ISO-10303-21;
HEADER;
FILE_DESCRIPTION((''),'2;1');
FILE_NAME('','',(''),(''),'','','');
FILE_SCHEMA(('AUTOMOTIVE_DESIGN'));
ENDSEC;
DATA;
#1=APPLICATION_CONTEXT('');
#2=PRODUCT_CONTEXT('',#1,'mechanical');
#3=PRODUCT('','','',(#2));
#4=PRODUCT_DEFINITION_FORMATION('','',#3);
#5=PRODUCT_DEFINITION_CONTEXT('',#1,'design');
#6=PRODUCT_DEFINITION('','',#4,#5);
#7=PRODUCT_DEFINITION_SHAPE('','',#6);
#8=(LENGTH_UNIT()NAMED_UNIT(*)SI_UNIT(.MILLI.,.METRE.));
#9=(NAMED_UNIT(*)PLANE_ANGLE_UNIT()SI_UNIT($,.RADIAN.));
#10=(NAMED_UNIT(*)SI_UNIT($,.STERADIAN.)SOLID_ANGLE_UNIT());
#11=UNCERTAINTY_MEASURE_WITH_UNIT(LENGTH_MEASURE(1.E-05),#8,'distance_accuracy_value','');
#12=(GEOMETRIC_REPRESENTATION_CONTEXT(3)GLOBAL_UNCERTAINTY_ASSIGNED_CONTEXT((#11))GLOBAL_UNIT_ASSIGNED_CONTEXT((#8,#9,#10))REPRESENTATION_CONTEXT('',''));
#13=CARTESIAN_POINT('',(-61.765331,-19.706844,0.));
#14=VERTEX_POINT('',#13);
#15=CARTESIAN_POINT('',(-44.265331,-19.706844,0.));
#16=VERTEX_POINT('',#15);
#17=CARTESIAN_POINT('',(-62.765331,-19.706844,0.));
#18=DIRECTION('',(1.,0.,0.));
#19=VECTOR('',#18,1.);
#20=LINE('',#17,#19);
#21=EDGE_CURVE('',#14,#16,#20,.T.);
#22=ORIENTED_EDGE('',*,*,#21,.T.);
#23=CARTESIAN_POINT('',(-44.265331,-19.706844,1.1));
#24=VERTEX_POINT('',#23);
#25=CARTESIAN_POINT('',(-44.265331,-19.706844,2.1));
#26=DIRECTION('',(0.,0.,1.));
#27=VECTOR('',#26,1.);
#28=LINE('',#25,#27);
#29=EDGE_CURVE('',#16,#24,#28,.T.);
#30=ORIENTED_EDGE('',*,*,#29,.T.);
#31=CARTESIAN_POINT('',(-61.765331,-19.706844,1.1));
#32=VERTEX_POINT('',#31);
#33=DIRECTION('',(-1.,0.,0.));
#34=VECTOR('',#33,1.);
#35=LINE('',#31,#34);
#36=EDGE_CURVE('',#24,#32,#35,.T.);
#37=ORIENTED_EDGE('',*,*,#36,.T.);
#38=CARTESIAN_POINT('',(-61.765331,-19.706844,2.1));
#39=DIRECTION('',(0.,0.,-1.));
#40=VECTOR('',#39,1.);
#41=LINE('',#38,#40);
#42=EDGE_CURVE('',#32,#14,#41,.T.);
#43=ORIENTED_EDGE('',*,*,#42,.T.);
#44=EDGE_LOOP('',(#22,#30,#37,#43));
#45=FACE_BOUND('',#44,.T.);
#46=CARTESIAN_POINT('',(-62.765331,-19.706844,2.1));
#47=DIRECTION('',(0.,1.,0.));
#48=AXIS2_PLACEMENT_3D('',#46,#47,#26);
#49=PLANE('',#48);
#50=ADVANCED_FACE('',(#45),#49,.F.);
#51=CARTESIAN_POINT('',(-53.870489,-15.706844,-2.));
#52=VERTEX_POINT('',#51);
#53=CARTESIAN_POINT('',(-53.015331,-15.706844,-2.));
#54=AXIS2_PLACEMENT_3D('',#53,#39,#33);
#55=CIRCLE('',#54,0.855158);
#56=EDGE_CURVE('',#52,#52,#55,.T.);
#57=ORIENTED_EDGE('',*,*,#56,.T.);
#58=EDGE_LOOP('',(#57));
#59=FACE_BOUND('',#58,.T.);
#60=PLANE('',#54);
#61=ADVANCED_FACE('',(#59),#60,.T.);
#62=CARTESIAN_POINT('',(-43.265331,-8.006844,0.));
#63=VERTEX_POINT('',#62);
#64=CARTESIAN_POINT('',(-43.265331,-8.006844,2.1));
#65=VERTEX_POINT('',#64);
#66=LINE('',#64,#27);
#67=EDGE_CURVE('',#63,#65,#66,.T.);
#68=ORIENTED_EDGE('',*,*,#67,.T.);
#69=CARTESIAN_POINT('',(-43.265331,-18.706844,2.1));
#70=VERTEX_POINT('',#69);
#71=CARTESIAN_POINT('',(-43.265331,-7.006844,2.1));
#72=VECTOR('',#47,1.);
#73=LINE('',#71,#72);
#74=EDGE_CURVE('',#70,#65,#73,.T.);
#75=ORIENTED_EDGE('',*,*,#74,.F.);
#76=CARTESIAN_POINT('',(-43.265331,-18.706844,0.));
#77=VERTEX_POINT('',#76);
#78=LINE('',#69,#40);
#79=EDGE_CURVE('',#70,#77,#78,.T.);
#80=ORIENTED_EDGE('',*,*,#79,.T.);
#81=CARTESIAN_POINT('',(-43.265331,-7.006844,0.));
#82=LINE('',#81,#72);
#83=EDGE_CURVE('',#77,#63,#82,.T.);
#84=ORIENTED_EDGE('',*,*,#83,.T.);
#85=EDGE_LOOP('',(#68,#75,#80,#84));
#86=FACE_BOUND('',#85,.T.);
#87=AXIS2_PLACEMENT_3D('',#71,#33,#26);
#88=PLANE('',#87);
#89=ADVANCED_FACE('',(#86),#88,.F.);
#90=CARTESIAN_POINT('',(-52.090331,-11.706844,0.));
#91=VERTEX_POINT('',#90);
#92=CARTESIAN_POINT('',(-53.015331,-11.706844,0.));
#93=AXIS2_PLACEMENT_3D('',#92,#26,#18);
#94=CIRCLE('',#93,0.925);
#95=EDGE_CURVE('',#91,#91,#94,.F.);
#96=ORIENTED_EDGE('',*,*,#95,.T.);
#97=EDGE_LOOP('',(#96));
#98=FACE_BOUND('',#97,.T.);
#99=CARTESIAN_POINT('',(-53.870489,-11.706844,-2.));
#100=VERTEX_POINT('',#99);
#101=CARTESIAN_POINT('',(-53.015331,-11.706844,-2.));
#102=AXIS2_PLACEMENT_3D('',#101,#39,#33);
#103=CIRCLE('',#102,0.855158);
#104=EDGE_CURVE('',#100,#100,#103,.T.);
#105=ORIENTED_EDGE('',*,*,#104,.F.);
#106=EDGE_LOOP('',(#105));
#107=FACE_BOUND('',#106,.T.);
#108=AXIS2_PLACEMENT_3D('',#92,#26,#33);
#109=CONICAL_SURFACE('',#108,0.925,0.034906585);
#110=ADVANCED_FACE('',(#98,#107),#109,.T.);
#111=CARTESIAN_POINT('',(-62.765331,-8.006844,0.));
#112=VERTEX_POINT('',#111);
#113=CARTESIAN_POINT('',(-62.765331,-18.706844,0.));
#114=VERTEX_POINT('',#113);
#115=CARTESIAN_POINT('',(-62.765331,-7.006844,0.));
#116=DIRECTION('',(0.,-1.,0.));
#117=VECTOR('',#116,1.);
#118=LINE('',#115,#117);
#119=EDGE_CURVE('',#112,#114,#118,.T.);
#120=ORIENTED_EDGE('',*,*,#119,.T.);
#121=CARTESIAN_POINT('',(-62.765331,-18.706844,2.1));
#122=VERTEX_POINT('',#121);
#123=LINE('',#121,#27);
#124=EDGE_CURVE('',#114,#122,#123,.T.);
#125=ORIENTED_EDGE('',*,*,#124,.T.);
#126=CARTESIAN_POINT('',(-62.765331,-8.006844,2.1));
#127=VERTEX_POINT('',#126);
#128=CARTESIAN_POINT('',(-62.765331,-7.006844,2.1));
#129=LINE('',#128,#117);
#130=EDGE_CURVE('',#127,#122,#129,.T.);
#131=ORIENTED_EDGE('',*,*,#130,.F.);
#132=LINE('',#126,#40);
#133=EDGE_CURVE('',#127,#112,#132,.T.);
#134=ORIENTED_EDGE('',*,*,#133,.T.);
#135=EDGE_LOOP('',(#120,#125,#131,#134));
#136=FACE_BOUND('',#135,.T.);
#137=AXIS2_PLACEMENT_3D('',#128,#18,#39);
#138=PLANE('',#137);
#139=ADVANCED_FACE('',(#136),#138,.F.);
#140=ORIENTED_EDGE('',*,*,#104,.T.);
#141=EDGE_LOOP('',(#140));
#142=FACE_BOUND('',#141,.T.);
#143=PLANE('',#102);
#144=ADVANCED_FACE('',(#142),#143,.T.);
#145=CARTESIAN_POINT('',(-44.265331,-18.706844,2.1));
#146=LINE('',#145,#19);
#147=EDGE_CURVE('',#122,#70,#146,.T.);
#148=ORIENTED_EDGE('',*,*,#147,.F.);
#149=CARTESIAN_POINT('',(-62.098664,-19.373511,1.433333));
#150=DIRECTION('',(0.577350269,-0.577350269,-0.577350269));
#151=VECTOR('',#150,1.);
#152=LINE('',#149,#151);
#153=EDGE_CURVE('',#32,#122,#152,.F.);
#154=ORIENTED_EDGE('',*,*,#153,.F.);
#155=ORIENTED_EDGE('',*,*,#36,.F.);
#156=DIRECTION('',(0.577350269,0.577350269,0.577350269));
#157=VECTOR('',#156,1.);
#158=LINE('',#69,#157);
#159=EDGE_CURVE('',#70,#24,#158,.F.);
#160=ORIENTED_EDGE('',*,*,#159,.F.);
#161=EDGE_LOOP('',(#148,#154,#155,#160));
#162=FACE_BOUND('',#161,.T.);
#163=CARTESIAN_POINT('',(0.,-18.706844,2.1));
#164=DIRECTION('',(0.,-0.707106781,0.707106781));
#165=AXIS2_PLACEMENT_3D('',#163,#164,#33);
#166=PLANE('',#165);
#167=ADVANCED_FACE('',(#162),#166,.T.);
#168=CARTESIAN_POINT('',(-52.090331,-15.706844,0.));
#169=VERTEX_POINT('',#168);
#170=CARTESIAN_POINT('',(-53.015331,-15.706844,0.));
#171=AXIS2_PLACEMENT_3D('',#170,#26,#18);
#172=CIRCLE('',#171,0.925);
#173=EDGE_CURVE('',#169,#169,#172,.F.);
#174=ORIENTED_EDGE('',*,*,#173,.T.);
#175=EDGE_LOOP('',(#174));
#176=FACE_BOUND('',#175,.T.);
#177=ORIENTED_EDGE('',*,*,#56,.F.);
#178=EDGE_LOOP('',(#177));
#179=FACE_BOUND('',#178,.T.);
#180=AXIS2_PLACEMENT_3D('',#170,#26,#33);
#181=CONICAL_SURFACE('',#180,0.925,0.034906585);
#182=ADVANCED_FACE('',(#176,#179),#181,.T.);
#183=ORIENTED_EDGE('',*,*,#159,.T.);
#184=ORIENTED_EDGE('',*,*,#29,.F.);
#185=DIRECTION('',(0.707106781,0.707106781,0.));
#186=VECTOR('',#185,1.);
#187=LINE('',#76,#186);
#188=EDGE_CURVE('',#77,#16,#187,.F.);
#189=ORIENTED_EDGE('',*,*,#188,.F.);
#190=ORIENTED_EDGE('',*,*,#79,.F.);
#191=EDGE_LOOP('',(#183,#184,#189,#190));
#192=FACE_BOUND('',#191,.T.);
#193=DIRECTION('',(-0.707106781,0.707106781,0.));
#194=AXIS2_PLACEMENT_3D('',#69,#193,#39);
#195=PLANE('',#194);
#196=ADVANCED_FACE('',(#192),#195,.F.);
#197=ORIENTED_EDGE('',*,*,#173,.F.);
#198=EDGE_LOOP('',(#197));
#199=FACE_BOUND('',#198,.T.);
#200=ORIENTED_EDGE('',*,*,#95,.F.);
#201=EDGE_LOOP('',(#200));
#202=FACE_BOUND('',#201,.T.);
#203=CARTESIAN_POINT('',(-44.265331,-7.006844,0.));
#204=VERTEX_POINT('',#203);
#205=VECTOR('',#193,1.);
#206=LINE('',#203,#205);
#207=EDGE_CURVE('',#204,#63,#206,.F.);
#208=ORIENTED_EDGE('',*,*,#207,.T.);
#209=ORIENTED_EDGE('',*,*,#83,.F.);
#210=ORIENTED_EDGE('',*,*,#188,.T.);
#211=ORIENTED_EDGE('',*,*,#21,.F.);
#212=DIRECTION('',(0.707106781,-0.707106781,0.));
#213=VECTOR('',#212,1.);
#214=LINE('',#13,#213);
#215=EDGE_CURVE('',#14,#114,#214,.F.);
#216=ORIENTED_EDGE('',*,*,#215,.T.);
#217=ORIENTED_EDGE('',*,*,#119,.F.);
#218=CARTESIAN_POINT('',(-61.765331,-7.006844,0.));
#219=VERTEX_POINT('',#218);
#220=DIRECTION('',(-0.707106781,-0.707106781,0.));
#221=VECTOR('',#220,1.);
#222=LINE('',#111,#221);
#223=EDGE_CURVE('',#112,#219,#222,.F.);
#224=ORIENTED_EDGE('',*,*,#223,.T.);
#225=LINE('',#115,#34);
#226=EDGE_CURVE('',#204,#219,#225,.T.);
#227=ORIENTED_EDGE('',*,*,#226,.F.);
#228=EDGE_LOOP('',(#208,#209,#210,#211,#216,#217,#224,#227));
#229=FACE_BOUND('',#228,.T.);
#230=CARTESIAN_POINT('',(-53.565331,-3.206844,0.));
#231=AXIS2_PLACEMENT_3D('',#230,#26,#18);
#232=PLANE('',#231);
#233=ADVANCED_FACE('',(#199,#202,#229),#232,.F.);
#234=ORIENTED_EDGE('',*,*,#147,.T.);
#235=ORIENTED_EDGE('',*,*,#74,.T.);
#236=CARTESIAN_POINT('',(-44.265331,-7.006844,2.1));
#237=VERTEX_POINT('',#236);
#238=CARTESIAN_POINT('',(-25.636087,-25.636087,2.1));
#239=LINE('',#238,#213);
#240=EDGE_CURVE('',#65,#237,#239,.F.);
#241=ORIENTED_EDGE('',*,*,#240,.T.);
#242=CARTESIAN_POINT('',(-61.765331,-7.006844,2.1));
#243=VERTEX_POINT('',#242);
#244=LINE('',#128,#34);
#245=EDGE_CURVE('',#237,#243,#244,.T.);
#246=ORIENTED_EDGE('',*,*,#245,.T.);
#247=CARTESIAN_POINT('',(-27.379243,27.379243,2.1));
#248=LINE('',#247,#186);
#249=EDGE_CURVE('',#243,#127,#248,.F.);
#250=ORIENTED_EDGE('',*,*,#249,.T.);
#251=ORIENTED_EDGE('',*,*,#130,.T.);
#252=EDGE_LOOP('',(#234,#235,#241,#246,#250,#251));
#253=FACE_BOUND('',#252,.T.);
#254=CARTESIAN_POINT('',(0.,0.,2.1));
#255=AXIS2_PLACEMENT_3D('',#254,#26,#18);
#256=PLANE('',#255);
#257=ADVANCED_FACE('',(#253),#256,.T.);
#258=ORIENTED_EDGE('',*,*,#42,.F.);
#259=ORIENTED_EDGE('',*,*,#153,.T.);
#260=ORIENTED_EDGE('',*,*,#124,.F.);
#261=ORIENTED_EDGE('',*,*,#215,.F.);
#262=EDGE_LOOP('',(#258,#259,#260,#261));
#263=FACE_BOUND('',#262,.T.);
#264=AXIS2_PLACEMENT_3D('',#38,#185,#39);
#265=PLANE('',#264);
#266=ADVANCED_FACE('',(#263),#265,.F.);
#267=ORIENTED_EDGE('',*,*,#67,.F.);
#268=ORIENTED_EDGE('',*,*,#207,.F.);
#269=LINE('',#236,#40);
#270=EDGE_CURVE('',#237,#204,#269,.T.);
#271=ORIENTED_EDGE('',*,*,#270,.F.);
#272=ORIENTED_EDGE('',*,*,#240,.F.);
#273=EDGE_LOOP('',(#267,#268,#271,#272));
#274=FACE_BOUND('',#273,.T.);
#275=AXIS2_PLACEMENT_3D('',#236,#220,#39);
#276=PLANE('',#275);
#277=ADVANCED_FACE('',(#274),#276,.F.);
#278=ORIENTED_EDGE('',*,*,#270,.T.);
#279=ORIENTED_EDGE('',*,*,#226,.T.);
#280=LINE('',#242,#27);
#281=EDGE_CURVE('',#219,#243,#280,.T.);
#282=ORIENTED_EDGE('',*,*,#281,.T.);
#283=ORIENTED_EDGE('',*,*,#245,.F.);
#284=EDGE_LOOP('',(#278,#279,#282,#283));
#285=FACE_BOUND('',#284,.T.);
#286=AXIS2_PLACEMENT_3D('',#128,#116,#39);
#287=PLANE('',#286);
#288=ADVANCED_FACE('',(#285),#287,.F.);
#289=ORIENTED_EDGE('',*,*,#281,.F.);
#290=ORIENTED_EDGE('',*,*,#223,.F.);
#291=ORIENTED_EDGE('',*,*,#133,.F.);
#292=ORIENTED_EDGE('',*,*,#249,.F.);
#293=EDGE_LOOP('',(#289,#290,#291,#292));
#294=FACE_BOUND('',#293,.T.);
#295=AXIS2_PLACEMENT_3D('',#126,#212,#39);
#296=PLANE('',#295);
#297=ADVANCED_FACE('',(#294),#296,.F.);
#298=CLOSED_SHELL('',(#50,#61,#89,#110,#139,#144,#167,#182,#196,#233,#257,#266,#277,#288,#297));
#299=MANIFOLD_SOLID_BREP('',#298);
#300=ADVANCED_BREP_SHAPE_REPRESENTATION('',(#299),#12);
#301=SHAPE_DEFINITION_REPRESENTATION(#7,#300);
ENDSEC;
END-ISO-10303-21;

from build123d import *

# Parameters (mm, degrees)
BUTTON_1_DEPTH            = 2.1
SKETCH_1_R                = 0.925
EXTRUDE_1_DEPTH           = 2
EXTRUDE_1_DRAFT           = 2
EXTRUDE_1_PROFILE_2_DEPTH = 2
EXTRUDE_1_PROFILE_2_DRAFT = 2
CHAMFER_1_SIZE            = 1
CHAMFER_2_SIZE            = 1


# Read off the part's stored shape, not the designer's step: 基体零件-button-1
with BuildPart() as part:
    # 基体零件-button-1 outline → 基体零件-button-1 (new body)
    with BuildSketch(Plane.XY):
        Polygon((-62.765330564, -7.006843897), (-62.765330564, -18.706843897), (-61.765330564, -19.706843897), (-44.265330564, -19.706843897), (-43.265330564, -18.706843897), (-43.265330564, -7.006843897), align=None)
    extrude(amount=BUTTON_1_DEPTH)


with BuildPart() as extrude_1_tool:
    # 草图1 → 凸台-拉伸1 (with draft: the straight prism first)
    with BuildSketch(Plane(origin=(0, 0, 0), x_dir=(-1, 0, 0), z_dir=(0, 0, -1))):
        with Locations((53.015330564, -11.706843897)):
            Circle(SKETCH_1_R)
    extrude(amount=EXTRUDE_1_DEPTH)
    # 凸台-拉伸1: the draft: its side faces are tilted about the plane it starts from
    extrude_1_sides = [extrude_1_tool.faces().sort_by_distance(p)[0] for p in [
        (-52.090330564, -11.706843897, -1),
    ]]
    draft(extrude_1_sides, Plane(origin=(0, 0, 0), x_dir=(-1, 0, 0), z_dir=(0, 0, -1)), EXTRUDE_1_DRAFT)


with BuildPart() as part_1:
    add(part.part)

    # 凸台-拉伸1: add extrude_1_tool
    add(extrude_1_tool.part)


with BuildPart() as extrude_1_profile_2_tool:
    # 草图1 → 凸台-拉伸1 profile 2 (with draft: the straight prism first)
    with BuildSketch(Plane(origin=(0, 0, 0), x_dir=(-1, 0, 0), z_dir=(0, 0, -1))):
        with Locations((53.015330564, -15.706843897)):
            Circle(SKETCH_1_R)
    extrude(amount=EXTRUDE_1_PROFILE_2_DEPTH)
    # 凸台-拉伸1 profile 2: the draft: its side faces are tilted about the plane it starts from
    extrude_1_profile_2_sides = [extrude_1_profile_2_tool.faces().sort_by_distance(p)[0] for p in [
        (-52.090330564, -15.706843897, -1),
    ]]
    draft(extrude_1_profile_2_sides, Plane(origin=(0, 0, 0), x_dir=(-1, 0, 0), z_dir=(0, 0, -1)), EXTRUDE_1_PROFILE_2_DRAFT)


with BuildPart() as part_2:
    add(part_1.part)

    # 凸台-拉伸1 profile 2: add extrude_1_profile_2_tool
    add(extrude_1_profile_2_tool.part)

    # 倒角1
    chamfer_1_edges = [part_2.edges().sort_by_distance(p)[0] for p in [
        (-53.015330564, -19.706843897, 2.1),
    ]]
    chamfer(chamfer_1_edges, length=CHAMFER_1_SIZE)

    # 倒角2
    chamfer_2_edges = [part_2.edges().sort_by_distance(p)[0] for p in [
        (-62.765330564, -7.006843897, 1.05),
        (-43.265330564, -7.006843897, 1.05),
    ]]
    chamfer(chamfer_2_edges, length=CHAMFER_2_SIZE)


solid = part_2.part
